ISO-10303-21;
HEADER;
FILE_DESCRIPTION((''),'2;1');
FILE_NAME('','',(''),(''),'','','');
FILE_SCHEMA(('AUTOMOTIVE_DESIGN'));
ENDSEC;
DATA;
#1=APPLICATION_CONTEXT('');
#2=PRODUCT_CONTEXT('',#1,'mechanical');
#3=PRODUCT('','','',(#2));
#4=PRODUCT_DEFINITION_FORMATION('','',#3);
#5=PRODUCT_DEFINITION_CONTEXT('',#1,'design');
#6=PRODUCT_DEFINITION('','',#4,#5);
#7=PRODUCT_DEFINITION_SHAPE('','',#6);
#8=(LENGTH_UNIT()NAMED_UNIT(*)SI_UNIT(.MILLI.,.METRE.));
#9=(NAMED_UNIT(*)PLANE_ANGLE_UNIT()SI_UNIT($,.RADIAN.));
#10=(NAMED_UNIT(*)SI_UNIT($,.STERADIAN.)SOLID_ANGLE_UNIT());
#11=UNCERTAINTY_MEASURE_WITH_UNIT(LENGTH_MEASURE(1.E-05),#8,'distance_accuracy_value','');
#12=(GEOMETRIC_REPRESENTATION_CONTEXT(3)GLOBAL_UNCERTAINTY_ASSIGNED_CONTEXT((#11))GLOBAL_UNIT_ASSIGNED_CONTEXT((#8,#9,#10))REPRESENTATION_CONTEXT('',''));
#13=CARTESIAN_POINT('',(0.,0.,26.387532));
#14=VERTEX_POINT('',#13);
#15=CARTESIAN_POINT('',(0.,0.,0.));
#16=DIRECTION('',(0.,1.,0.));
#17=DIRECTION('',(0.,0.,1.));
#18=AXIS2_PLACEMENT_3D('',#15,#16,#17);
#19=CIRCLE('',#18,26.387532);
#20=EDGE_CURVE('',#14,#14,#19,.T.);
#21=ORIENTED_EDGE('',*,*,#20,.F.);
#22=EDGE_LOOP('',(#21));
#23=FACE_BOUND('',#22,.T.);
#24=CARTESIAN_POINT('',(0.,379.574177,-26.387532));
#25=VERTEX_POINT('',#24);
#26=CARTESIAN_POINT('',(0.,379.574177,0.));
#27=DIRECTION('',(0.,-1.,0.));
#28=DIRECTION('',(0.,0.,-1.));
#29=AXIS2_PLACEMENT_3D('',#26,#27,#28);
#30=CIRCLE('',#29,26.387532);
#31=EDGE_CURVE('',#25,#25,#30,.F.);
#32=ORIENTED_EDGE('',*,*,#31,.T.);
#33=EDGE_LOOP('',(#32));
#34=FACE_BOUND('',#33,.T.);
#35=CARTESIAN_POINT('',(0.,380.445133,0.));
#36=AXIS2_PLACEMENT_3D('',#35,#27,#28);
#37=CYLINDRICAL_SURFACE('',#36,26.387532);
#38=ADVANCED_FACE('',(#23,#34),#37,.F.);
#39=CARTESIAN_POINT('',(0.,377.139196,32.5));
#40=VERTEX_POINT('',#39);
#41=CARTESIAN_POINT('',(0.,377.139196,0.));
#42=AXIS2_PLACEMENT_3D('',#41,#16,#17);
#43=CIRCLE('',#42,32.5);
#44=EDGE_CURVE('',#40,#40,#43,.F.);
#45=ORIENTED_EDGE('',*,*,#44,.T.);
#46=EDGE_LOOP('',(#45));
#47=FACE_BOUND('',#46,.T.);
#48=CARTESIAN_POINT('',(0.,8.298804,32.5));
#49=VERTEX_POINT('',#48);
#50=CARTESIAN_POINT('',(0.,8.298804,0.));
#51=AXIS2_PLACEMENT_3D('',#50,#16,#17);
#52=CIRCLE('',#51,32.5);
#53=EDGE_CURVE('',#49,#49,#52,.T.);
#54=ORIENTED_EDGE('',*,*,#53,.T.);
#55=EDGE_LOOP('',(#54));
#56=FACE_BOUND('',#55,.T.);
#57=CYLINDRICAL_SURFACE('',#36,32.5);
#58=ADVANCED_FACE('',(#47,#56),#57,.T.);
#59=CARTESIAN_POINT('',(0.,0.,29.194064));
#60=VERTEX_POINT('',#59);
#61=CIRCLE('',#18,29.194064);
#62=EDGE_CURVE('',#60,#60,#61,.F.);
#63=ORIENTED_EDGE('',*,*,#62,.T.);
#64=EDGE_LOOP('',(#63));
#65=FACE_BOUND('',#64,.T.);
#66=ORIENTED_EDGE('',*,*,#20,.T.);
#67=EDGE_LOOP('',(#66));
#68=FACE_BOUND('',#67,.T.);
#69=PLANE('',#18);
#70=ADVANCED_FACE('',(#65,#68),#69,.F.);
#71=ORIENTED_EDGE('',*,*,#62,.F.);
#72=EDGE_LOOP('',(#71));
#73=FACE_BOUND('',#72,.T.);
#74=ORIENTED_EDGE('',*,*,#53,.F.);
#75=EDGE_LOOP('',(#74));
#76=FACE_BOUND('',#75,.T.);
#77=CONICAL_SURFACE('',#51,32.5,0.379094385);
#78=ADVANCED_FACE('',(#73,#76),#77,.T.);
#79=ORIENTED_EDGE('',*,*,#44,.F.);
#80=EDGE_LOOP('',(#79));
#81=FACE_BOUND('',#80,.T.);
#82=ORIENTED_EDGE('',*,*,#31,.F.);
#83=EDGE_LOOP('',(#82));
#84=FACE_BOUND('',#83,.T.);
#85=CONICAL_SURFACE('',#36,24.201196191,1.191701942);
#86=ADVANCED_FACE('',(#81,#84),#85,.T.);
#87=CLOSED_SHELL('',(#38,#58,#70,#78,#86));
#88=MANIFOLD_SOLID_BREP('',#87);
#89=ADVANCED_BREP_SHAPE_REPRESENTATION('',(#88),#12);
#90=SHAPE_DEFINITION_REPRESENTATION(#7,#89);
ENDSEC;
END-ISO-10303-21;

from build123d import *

# Parameters (mm, degrees)
SKETCH1_R           = 32.5
BOSS_EXTRUDE1_DEPTH = 380.445133
SKETCH2_R           = 26.387532092
CUT_EXTRUDE1_DEPTH  = 384.211428879
CHAMFER1_SIZE       = 3.305936
CHAMFER1_SIZE_2     = 8.298804


with BuildPart() as part:
    # Sketch1 → Boss-Extrude1 (new body)
    with BuildSketch(Plane(origin=(0, 0, 0), x_dir=(1, 0, 0), z_dir=(0, 1, 0))):
        with Locations(Location((0, 0, 0), (0, 0, 270))):
            Circle(SKETCH1_R)
    extrude(amount=BOSS_EXTRUDE1_DEPTH)

    # Sketch2 → Cut-Extrude1 (cut, through all)
    with BuildSketch(Plane(origin=(0, 0, 0), x_dir=(1, 0, 0), z_dir=(0, 1, 0))):
        with Locations(Location((0, 0, 0), (0, 0, 270))):
            Circle(SKETCH2_R)
    extrude(amount=CUT_EXTRUDE1_DEPTH, mode=Mode.SUBTRACT)

    # Chamfer1
    # the kernel refuses this chamfer: 8.298804, 3.305936 mm, written as the material it takes off along each edge
    with BuildSketch(Plane(origin=(0, 380.445133, 0), x_dir=(0, 0, 1), z_dir=(-1, 0, 0))) as chamfer1_piece_1:
        Polygon((32.5, -CHAMFER1_SIZE), (32.5 - CHAMFER1_SIZE_2, 0), (32.5, 0), align=None)
    revolve(axis=Axis((0, 380.445133, 0), (0, 1, 0)), mode=Mode.SUBTRACT)
    with BuildSketch(Plane(origin=(0, 0, 0), x_dir=(0, 0, 1), z_dir=(-1, 0, 0))) as chamfer1_piece_2:
        Polygon((32.5, CHAMFER1_SIZE_2), (32.5 - CHAMFER1_SIZE, 0), (32.5, 0), align=None)
    revolve(axis=Axis((0, 0, 0), (0, 1, 0)), mode=Mode.SUBTRACT)


solid = part.part
